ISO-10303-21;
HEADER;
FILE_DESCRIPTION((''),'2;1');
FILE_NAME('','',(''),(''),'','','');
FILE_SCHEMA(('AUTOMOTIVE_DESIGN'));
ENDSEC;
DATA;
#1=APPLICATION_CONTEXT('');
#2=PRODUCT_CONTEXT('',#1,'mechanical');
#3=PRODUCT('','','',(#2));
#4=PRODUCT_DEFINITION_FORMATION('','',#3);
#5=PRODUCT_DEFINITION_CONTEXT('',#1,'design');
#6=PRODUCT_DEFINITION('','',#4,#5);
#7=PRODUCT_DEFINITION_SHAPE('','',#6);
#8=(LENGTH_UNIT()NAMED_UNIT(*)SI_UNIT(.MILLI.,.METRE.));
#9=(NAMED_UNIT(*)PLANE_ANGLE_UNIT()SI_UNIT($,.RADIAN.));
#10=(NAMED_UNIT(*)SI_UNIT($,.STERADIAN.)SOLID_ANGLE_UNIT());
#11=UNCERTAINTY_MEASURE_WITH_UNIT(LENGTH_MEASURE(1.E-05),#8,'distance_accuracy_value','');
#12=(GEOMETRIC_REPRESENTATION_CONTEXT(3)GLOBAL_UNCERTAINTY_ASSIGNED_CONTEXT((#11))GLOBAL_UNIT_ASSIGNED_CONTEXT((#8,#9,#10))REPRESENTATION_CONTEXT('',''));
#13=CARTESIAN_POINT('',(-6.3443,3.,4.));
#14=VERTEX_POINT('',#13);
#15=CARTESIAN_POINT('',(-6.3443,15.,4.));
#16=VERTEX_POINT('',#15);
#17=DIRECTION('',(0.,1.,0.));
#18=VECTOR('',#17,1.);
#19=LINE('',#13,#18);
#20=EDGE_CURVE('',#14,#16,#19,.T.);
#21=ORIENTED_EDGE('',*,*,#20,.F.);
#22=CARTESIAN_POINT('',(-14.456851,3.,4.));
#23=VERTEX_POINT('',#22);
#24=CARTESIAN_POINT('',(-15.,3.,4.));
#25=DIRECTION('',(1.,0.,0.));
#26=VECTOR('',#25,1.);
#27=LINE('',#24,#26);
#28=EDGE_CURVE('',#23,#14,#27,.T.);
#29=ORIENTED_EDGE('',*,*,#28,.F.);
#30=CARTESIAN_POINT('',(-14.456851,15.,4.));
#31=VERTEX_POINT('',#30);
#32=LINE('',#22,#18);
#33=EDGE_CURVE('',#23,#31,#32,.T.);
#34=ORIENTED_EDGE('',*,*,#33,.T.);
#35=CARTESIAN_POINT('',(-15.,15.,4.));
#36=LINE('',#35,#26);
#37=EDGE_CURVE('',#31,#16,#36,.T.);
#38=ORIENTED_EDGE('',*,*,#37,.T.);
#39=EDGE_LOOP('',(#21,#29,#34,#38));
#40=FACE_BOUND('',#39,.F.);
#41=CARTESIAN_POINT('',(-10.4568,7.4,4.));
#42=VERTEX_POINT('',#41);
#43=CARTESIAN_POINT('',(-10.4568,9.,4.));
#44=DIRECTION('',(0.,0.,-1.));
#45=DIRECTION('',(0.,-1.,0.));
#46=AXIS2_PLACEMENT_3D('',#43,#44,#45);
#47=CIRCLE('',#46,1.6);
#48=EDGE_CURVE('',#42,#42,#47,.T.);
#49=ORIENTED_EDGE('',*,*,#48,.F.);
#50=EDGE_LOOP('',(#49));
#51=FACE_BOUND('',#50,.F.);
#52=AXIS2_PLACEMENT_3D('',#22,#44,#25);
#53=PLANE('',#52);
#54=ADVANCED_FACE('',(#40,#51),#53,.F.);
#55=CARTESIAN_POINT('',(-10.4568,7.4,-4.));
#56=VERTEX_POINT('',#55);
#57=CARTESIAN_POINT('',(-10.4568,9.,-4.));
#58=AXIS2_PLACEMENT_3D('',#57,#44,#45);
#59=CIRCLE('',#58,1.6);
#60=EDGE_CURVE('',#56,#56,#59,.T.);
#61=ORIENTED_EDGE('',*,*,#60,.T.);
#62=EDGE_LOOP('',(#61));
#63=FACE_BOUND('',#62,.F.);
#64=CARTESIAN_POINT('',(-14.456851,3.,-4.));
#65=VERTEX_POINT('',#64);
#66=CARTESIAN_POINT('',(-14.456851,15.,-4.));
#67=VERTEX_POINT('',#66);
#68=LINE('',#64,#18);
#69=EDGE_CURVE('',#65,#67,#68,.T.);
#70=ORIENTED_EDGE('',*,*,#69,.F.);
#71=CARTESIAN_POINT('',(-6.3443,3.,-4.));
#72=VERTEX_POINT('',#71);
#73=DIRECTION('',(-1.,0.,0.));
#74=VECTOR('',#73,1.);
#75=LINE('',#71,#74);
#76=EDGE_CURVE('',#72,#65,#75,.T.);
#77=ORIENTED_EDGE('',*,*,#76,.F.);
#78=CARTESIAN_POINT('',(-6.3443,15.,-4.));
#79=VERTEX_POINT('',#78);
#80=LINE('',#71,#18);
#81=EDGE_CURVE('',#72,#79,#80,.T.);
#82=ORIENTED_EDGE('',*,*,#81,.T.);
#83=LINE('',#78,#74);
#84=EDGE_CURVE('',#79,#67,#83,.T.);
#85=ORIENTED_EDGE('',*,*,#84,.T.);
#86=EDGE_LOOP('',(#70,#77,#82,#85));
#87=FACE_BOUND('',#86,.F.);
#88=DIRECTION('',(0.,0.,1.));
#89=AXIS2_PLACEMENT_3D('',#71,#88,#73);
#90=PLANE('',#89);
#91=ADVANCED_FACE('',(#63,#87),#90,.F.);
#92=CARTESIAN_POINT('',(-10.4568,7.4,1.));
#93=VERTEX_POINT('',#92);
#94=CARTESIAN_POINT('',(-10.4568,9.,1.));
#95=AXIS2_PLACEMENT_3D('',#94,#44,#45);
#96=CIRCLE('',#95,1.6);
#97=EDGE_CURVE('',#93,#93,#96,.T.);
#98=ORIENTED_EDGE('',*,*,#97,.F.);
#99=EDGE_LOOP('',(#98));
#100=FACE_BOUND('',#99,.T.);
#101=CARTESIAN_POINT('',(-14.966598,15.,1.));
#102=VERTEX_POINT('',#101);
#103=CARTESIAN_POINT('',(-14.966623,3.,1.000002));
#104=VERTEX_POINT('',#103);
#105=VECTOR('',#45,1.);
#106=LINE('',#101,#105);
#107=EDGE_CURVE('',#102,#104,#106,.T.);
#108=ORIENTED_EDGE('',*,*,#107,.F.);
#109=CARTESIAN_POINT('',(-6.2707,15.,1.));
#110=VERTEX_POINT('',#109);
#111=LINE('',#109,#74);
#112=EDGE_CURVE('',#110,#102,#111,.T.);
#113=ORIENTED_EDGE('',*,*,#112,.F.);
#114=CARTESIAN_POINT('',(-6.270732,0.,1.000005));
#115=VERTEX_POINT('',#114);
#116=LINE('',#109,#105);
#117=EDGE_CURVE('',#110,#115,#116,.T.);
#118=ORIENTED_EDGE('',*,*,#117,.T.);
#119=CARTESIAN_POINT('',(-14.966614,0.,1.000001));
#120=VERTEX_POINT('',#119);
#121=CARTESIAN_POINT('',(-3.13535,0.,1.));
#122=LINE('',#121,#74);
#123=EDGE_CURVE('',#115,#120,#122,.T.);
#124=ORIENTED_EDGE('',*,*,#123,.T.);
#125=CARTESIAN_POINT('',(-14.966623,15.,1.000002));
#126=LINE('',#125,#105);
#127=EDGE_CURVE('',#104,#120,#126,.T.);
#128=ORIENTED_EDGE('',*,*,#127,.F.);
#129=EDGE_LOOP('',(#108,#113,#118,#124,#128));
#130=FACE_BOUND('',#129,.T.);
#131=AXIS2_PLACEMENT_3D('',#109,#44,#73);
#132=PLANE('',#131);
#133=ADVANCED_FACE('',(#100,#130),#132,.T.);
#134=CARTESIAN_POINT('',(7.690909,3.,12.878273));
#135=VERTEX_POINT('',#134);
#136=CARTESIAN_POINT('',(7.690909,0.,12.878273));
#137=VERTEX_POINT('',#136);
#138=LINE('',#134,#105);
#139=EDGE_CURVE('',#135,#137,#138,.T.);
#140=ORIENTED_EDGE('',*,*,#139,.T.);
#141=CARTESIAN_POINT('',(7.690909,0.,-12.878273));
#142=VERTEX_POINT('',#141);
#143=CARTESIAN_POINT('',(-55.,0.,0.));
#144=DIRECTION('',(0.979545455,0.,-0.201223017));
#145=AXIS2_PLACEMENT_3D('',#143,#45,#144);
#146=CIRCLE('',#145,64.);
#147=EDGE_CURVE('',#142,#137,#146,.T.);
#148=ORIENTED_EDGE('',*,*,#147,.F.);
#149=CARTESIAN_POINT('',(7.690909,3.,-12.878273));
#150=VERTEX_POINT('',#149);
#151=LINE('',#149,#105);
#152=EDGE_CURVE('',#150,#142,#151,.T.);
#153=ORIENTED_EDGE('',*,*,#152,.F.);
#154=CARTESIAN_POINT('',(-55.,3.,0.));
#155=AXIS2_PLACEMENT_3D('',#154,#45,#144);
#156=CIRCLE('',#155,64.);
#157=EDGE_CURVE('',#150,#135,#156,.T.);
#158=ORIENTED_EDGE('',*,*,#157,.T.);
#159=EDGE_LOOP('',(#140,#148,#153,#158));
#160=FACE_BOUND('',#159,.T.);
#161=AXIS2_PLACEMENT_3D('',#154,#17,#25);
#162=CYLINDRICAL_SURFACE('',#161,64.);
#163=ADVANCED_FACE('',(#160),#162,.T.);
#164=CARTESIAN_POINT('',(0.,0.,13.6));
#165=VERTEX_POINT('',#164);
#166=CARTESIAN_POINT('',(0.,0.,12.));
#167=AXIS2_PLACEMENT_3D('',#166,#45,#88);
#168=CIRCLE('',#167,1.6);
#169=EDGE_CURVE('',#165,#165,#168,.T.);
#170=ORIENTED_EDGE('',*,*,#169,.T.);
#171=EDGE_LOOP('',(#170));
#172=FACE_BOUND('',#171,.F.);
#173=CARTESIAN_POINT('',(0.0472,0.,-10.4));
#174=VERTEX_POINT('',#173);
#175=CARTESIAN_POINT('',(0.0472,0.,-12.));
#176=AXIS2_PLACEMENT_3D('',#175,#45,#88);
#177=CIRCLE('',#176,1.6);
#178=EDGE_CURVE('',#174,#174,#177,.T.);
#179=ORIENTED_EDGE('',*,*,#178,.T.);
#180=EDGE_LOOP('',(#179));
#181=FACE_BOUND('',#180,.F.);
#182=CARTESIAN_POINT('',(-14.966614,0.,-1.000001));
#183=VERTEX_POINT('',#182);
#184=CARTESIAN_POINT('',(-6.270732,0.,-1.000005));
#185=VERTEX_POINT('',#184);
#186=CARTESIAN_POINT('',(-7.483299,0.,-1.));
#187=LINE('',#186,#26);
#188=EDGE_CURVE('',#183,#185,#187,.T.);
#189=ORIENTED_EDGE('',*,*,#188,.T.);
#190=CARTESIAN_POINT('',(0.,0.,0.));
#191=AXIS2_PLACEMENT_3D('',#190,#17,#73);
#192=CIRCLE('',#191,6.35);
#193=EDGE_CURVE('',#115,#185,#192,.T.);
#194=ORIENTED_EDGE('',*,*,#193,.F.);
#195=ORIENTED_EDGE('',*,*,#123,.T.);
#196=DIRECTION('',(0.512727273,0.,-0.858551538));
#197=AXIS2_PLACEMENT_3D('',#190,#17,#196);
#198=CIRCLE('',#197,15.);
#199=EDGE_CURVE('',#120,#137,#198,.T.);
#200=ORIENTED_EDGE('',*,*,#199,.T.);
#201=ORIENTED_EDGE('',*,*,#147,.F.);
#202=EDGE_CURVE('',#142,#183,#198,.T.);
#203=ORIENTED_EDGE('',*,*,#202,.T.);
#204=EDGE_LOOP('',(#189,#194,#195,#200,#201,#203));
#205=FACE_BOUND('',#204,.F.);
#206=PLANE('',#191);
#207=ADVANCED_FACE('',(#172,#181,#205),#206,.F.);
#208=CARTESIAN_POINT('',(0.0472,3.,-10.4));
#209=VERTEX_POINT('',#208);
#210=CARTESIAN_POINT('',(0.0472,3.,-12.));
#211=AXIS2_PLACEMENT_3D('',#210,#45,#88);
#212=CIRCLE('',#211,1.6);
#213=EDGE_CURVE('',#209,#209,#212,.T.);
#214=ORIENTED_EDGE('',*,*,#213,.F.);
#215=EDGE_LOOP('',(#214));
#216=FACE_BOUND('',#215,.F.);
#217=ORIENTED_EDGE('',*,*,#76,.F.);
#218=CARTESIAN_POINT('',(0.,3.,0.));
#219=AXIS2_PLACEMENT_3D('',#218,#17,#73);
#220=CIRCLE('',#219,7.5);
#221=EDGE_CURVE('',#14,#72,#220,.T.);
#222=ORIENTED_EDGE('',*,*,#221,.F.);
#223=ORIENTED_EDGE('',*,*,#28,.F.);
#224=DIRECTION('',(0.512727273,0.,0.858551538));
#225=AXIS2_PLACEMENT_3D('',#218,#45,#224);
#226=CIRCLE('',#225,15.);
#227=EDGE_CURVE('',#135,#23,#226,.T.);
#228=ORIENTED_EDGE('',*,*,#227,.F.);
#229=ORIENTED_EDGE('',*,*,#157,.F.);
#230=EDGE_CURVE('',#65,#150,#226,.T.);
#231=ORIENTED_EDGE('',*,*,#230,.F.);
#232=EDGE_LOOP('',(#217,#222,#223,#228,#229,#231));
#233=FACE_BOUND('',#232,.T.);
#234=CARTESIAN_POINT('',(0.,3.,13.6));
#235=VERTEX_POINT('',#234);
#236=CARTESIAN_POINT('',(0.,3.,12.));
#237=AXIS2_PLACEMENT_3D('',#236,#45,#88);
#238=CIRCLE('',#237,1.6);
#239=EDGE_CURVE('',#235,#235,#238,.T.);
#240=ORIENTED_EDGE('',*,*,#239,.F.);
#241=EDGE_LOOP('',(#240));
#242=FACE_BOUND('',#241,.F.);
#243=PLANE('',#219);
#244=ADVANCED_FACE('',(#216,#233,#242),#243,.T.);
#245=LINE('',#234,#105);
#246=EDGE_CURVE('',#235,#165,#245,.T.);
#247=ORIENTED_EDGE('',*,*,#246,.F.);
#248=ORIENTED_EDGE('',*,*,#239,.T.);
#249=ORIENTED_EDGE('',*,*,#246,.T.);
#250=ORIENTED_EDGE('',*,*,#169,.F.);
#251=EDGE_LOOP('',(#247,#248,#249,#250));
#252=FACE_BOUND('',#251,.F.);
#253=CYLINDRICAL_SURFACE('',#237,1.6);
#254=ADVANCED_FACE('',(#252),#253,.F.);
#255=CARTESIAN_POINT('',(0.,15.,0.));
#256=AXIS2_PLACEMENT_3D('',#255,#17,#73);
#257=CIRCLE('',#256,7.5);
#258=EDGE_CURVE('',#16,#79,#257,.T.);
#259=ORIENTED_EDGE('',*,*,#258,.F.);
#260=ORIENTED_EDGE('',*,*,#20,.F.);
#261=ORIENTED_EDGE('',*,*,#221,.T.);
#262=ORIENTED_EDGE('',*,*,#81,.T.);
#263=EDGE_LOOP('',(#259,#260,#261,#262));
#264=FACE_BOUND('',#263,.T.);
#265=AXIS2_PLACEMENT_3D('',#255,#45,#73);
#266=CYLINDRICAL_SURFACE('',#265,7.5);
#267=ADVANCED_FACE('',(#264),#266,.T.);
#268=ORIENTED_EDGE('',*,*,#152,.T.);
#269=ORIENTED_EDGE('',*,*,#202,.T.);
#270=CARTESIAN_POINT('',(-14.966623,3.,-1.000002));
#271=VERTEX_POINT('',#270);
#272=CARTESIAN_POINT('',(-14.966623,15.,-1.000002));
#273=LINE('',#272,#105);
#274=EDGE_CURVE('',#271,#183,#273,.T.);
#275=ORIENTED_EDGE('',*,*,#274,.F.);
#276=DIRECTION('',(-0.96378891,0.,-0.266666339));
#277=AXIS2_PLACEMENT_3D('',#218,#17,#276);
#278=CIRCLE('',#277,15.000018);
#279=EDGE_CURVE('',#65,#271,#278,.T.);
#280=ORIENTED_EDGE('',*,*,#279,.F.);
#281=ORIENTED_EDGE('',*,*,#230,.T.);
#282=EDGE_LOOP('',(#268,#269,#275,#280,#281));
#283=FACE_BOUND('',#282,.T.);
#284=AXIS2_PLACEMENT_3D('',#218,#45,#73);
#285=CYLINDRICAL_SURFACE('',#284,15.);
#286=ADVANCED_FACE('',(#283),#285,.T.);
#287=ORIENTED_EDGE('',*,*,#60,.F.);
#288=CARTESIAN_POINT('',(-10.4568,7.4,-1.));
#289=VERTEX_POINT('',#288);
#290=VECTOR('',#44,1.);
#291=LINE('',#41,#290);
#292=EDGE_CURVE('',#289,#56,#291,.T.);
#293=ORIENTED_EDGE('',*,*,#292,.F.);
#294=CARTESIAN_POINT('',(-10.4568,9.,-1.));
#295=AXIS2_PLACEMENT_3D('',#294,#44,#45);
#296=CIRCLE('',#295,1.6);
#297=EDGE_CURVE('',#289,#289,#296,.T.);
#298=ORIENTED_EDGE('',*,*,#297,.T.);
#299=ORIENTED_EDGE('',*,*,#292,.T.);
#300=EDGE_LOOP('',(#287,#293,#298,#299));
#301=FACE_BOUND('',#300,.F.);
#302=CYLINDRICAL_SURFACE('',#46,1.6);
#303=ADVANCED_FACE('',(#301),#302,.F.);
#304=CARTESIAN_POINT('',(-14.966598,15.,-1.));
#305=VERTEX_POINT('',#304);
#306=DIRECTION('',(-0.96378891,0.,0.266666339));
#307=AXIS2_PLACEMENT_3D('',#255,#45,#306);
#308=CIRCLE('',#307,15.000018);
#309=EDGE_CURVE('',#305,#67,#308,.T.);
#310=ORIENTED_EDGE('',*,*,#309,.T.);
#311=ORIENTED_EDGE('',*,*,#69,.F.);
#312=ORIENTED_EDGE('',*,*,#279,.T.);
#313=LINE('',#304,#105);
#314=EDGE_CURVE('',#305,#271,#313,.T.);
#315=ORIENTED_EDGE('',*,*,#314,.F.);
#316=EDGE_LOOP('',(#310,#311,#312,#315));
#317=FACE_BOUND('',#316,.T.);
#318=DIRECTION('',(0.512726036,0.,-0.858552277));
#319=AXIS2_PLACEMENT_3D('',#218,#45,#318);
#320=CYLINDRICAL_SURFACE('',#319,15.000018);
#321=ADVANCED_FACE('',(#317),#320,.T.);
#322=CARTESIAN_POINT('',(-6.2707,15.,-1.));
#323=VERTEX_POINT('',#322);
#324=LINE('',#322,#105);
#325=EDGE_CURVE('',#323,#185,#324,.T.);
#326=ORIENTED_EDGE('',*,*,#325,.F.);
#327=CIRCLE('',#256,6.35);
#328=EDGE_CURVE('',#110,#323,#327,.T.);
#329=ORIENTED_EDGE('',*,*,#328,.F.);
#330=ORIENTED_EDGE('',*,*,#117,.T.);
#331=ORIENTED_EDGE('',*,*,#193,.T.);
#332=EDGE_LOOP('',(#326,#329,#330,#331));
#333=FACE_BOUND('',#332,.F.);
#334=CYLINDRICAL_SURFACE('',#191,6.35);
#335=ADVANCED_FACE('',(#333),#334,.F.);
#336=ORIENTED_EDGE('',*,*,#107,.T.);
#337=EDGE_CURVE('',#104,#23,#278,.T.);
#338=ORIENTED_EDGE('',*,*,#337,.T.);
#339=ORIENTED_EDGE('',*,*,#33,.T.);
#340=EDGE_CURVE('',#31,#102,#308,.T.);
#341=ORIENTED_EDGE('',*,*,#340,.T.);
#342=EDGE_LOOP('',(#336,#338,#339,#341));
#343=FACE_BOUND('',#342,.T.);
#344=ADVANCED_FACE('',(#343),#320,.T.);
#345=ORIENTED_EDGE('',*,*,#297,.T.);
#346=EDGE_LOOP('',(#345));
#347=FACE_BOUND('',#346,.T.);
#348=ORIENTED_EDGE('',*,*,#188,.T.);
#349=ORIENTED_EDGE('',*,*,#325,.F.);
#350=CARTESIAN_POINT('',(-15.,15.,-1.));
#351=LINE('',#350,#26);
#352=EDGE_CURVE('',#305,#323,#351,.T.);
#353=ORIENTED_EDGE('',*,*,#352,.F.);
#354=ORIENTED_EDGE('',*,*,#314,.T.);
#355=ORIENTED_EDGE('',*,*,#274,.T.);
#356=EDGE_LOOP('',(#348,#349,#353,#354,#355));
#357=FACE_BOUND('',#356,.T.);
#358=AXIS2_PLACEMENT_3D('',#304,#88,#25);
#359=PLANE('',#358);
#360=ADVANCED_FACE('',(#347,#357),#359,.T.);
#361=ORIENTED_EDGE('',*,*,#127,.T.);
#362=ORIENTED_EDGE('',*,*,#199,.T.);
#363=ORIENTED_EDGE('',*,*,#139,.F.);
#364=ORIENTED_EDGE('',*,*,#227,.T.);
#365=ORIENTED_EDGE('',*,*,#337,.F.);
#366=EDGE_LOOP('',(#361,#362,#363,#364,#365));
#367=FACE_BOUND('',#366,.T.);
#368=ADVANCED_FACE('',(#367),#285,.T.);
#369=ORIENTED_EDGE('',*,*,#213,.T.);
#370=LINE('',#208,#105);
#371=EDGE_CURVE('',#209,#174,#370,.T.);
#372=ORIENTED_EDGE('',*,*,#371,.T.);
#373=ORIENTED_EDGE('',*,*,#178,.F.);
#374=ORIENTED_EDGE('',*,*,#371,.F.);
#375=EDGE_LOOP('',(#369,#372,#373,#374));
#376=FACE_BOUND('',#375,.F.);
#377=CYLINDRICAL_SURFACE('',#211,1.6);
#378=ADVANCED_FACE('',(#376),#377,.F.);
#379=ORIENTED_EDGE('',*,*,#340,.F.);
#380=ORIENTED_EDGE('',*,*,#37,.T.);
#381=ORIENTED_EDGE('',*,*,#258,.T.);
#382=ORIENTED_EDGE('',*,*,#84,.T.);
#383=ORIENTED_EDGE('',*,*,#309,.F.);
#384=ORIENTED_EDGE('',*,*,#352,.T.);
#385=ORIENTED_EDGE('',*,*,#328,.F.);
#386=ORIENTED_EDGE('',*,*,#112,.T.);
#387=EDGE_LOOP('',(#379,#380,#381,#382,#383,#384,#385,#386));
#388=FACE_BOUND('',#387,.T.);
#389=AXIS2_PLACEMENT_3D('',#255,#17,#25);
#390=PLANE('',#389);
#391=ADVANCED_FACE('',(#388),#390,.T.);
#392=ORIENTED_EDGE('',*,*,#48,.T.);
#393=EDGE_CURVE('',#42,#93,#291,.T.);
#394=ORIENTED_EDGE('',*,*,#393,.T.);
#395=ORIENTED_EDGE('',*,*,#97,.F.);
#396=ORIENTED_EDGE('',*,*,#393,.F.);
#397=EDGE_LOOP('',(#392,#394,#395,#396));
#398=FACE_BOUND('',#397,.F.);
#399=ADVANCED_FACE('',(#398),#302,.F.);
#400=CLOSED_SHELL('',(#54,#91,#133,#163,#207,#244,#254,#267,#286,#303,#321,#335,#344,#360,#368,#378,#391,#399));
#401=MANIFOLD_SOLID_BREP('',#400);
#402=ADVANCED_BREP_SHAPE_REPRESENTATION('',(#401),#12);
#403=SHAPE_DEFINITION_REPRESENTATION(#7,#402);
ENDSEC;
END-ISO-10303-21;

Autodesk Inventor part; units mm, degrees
ref_plane "YZ Plane" through (0, 0, 0) normal (1, 0, 0) x (0, 1, 0)
ref_plane "XZ Plane" through (0, 0, 0) normal (0, 1, 0) x (-1, 0, 0)
ref_plane "XY Plane" through (0, 0, 0) normal (0, 0, 1) x (1, 0, 0)
sketch "Sketch1" plane through (0, 0, 0) normal (0, 0, 1) x (1, 0, 0)
  line L0 (-15, 0) -> (-6.35, 0)
  line L1 (-6.35, 0) -> (-6.35, 15)
  line L2 (-6.35, 15) -> (-7.5, 15)
  line L3 (-7.5, 15) -> (-7.5, 3)
  line L4 (-7.5, 3) -> (-15, 3)
  line L5 (-15, 3) -> (-15, 0)
  line L6 (0, -3) -> (0, 18) projected
  point P0 (0, 0)
  dimension "d0" = 3
  dimension "d2" = 15
  dimension "d3" = 6.35
  dimension "d4" = 15
  dimension "d17" = 7.5
  dimension "d18" = 1.15
revolve "Revolution1" add sketch "Sketch1" angle 360 about axis through (0, -10, 0) along (0, 1, 0)
sketch "Sketch2" plane through (0, 3, 0) normal (0, 1, 0) x (1, 0, 0)
  point P0 (0, 0)
  point P1 (0.0472, 12)
  point P2 (0, -12)
  dimension "d6" = 12
  dimension "d22" = 12
hole "Hole1" at (0.0472, 3, -12) at (0, 3, 12) direction (0, -1, 0) diameter 3.2 end through all
sketch "Sketch4" plane through (0, 3, 0) normal (0, 1, 0) x (1, 0, 0)
  circle A0 centre (0, 0) radius 15 projected
  circle A1 centre (0, 0) radius 7.5 projected
  circle A2 centre (-55, 0) radius 64
  point P0 (7.6909, 12.8783)
  point P1 (7.5, 0)
  point P2 (7.6909, -12.8783)
  dimension "d23" = 128
  dimension "d24" = 55
extrude "Extrusion2" cut sketch "Sketch4" against normal through all contours A0 A2 picked at (10.8452, -2.4648)
sketch "Sketch6" plane through (0, 3, 0) normal (0, 1, 0) x (1, 0, 0)
  arc A0 (7.6909, 12.8783) -> (7.6909, -12.8783) centre (0, 0) ccw projected
  circle A1 centre (0, 0) radius 7.5 projected
  line L0 (-6.3443, 4) -> (-15, 4)
  line L1 (-15, 4) -> (-15, -4)
  line L2 (-15, -4) -> (-6.3443, -4)
  line L3 (-6.3443, -4) -> (-6.3443, 4)
  point P0 (-14.4568, -4)
  point P1 (-6.3443, -4)
  point P2 (-14.4568, 4)
  dimension "d32" = 4
  dimension "d33" = 4
extrude "Extrusion3" add sketch "Sketch6" along normal up to surface (12 mm away) contours L0 A1 L2 A0
sketch "Sketch7" plane through (-14.4568, 15, -4) normal (0, 1, 0) x (1, 0, 0)
  circle A0 centre (14.4568, -4) radius 6.35 projected
  line L0 (8.1861, -5) -> (-0.5432, -5)
  line L1 (-0.5432, -5) -> (-0.5432, -3)
  line L2 (-0.5432, -3) -> (8.1861, -3)
  line L3 (8.1861, -3) -> (8.1861, -5)
  arc A1 (0, 0) -> (0, -8) centre (14.4568, -4) ccw projected
  point P0 (-0.5098, -5)
  point P1 (8.1861, -3)
  point P2 (-0.5098, -3)
  dimension "d27" = 1
  dimension "d28" = 1
extrude "Extrusion4" cut sketch "Sketch7" against normal through all contours A0 L0 A1 L2
sketch "Sketch8" plane through (-14.4568, 3, 4) normal (0, 0, 1) x (1, 0, 0)
  line L0 (0, 0) -> (0, 12) projected
  line L1 (8.1125, 12) -> (0, 12) projected
  point P0 (7.0914, 12)
  point P1 (4, 6)
  dimension "d35" = 12
  dimension "d37" = 4
  dimension "d38" = 6
hole "Hole2" at (-10.4568, 9, 4) direction (0, 0, -1) diameter 3.2 end through all
equation "\"d22\" = d6"
equation "\"d24\" = tubes_r"
equation "\"d33\" = d32"
equation "\"d28\" = d27"
equation "\"d38\" = 0.5 * d35"
equation "\"tubes_r\" = 55"
properties part number "BaffleClampWithScrew3Dprint" material "Brass, Soft Yellow"
